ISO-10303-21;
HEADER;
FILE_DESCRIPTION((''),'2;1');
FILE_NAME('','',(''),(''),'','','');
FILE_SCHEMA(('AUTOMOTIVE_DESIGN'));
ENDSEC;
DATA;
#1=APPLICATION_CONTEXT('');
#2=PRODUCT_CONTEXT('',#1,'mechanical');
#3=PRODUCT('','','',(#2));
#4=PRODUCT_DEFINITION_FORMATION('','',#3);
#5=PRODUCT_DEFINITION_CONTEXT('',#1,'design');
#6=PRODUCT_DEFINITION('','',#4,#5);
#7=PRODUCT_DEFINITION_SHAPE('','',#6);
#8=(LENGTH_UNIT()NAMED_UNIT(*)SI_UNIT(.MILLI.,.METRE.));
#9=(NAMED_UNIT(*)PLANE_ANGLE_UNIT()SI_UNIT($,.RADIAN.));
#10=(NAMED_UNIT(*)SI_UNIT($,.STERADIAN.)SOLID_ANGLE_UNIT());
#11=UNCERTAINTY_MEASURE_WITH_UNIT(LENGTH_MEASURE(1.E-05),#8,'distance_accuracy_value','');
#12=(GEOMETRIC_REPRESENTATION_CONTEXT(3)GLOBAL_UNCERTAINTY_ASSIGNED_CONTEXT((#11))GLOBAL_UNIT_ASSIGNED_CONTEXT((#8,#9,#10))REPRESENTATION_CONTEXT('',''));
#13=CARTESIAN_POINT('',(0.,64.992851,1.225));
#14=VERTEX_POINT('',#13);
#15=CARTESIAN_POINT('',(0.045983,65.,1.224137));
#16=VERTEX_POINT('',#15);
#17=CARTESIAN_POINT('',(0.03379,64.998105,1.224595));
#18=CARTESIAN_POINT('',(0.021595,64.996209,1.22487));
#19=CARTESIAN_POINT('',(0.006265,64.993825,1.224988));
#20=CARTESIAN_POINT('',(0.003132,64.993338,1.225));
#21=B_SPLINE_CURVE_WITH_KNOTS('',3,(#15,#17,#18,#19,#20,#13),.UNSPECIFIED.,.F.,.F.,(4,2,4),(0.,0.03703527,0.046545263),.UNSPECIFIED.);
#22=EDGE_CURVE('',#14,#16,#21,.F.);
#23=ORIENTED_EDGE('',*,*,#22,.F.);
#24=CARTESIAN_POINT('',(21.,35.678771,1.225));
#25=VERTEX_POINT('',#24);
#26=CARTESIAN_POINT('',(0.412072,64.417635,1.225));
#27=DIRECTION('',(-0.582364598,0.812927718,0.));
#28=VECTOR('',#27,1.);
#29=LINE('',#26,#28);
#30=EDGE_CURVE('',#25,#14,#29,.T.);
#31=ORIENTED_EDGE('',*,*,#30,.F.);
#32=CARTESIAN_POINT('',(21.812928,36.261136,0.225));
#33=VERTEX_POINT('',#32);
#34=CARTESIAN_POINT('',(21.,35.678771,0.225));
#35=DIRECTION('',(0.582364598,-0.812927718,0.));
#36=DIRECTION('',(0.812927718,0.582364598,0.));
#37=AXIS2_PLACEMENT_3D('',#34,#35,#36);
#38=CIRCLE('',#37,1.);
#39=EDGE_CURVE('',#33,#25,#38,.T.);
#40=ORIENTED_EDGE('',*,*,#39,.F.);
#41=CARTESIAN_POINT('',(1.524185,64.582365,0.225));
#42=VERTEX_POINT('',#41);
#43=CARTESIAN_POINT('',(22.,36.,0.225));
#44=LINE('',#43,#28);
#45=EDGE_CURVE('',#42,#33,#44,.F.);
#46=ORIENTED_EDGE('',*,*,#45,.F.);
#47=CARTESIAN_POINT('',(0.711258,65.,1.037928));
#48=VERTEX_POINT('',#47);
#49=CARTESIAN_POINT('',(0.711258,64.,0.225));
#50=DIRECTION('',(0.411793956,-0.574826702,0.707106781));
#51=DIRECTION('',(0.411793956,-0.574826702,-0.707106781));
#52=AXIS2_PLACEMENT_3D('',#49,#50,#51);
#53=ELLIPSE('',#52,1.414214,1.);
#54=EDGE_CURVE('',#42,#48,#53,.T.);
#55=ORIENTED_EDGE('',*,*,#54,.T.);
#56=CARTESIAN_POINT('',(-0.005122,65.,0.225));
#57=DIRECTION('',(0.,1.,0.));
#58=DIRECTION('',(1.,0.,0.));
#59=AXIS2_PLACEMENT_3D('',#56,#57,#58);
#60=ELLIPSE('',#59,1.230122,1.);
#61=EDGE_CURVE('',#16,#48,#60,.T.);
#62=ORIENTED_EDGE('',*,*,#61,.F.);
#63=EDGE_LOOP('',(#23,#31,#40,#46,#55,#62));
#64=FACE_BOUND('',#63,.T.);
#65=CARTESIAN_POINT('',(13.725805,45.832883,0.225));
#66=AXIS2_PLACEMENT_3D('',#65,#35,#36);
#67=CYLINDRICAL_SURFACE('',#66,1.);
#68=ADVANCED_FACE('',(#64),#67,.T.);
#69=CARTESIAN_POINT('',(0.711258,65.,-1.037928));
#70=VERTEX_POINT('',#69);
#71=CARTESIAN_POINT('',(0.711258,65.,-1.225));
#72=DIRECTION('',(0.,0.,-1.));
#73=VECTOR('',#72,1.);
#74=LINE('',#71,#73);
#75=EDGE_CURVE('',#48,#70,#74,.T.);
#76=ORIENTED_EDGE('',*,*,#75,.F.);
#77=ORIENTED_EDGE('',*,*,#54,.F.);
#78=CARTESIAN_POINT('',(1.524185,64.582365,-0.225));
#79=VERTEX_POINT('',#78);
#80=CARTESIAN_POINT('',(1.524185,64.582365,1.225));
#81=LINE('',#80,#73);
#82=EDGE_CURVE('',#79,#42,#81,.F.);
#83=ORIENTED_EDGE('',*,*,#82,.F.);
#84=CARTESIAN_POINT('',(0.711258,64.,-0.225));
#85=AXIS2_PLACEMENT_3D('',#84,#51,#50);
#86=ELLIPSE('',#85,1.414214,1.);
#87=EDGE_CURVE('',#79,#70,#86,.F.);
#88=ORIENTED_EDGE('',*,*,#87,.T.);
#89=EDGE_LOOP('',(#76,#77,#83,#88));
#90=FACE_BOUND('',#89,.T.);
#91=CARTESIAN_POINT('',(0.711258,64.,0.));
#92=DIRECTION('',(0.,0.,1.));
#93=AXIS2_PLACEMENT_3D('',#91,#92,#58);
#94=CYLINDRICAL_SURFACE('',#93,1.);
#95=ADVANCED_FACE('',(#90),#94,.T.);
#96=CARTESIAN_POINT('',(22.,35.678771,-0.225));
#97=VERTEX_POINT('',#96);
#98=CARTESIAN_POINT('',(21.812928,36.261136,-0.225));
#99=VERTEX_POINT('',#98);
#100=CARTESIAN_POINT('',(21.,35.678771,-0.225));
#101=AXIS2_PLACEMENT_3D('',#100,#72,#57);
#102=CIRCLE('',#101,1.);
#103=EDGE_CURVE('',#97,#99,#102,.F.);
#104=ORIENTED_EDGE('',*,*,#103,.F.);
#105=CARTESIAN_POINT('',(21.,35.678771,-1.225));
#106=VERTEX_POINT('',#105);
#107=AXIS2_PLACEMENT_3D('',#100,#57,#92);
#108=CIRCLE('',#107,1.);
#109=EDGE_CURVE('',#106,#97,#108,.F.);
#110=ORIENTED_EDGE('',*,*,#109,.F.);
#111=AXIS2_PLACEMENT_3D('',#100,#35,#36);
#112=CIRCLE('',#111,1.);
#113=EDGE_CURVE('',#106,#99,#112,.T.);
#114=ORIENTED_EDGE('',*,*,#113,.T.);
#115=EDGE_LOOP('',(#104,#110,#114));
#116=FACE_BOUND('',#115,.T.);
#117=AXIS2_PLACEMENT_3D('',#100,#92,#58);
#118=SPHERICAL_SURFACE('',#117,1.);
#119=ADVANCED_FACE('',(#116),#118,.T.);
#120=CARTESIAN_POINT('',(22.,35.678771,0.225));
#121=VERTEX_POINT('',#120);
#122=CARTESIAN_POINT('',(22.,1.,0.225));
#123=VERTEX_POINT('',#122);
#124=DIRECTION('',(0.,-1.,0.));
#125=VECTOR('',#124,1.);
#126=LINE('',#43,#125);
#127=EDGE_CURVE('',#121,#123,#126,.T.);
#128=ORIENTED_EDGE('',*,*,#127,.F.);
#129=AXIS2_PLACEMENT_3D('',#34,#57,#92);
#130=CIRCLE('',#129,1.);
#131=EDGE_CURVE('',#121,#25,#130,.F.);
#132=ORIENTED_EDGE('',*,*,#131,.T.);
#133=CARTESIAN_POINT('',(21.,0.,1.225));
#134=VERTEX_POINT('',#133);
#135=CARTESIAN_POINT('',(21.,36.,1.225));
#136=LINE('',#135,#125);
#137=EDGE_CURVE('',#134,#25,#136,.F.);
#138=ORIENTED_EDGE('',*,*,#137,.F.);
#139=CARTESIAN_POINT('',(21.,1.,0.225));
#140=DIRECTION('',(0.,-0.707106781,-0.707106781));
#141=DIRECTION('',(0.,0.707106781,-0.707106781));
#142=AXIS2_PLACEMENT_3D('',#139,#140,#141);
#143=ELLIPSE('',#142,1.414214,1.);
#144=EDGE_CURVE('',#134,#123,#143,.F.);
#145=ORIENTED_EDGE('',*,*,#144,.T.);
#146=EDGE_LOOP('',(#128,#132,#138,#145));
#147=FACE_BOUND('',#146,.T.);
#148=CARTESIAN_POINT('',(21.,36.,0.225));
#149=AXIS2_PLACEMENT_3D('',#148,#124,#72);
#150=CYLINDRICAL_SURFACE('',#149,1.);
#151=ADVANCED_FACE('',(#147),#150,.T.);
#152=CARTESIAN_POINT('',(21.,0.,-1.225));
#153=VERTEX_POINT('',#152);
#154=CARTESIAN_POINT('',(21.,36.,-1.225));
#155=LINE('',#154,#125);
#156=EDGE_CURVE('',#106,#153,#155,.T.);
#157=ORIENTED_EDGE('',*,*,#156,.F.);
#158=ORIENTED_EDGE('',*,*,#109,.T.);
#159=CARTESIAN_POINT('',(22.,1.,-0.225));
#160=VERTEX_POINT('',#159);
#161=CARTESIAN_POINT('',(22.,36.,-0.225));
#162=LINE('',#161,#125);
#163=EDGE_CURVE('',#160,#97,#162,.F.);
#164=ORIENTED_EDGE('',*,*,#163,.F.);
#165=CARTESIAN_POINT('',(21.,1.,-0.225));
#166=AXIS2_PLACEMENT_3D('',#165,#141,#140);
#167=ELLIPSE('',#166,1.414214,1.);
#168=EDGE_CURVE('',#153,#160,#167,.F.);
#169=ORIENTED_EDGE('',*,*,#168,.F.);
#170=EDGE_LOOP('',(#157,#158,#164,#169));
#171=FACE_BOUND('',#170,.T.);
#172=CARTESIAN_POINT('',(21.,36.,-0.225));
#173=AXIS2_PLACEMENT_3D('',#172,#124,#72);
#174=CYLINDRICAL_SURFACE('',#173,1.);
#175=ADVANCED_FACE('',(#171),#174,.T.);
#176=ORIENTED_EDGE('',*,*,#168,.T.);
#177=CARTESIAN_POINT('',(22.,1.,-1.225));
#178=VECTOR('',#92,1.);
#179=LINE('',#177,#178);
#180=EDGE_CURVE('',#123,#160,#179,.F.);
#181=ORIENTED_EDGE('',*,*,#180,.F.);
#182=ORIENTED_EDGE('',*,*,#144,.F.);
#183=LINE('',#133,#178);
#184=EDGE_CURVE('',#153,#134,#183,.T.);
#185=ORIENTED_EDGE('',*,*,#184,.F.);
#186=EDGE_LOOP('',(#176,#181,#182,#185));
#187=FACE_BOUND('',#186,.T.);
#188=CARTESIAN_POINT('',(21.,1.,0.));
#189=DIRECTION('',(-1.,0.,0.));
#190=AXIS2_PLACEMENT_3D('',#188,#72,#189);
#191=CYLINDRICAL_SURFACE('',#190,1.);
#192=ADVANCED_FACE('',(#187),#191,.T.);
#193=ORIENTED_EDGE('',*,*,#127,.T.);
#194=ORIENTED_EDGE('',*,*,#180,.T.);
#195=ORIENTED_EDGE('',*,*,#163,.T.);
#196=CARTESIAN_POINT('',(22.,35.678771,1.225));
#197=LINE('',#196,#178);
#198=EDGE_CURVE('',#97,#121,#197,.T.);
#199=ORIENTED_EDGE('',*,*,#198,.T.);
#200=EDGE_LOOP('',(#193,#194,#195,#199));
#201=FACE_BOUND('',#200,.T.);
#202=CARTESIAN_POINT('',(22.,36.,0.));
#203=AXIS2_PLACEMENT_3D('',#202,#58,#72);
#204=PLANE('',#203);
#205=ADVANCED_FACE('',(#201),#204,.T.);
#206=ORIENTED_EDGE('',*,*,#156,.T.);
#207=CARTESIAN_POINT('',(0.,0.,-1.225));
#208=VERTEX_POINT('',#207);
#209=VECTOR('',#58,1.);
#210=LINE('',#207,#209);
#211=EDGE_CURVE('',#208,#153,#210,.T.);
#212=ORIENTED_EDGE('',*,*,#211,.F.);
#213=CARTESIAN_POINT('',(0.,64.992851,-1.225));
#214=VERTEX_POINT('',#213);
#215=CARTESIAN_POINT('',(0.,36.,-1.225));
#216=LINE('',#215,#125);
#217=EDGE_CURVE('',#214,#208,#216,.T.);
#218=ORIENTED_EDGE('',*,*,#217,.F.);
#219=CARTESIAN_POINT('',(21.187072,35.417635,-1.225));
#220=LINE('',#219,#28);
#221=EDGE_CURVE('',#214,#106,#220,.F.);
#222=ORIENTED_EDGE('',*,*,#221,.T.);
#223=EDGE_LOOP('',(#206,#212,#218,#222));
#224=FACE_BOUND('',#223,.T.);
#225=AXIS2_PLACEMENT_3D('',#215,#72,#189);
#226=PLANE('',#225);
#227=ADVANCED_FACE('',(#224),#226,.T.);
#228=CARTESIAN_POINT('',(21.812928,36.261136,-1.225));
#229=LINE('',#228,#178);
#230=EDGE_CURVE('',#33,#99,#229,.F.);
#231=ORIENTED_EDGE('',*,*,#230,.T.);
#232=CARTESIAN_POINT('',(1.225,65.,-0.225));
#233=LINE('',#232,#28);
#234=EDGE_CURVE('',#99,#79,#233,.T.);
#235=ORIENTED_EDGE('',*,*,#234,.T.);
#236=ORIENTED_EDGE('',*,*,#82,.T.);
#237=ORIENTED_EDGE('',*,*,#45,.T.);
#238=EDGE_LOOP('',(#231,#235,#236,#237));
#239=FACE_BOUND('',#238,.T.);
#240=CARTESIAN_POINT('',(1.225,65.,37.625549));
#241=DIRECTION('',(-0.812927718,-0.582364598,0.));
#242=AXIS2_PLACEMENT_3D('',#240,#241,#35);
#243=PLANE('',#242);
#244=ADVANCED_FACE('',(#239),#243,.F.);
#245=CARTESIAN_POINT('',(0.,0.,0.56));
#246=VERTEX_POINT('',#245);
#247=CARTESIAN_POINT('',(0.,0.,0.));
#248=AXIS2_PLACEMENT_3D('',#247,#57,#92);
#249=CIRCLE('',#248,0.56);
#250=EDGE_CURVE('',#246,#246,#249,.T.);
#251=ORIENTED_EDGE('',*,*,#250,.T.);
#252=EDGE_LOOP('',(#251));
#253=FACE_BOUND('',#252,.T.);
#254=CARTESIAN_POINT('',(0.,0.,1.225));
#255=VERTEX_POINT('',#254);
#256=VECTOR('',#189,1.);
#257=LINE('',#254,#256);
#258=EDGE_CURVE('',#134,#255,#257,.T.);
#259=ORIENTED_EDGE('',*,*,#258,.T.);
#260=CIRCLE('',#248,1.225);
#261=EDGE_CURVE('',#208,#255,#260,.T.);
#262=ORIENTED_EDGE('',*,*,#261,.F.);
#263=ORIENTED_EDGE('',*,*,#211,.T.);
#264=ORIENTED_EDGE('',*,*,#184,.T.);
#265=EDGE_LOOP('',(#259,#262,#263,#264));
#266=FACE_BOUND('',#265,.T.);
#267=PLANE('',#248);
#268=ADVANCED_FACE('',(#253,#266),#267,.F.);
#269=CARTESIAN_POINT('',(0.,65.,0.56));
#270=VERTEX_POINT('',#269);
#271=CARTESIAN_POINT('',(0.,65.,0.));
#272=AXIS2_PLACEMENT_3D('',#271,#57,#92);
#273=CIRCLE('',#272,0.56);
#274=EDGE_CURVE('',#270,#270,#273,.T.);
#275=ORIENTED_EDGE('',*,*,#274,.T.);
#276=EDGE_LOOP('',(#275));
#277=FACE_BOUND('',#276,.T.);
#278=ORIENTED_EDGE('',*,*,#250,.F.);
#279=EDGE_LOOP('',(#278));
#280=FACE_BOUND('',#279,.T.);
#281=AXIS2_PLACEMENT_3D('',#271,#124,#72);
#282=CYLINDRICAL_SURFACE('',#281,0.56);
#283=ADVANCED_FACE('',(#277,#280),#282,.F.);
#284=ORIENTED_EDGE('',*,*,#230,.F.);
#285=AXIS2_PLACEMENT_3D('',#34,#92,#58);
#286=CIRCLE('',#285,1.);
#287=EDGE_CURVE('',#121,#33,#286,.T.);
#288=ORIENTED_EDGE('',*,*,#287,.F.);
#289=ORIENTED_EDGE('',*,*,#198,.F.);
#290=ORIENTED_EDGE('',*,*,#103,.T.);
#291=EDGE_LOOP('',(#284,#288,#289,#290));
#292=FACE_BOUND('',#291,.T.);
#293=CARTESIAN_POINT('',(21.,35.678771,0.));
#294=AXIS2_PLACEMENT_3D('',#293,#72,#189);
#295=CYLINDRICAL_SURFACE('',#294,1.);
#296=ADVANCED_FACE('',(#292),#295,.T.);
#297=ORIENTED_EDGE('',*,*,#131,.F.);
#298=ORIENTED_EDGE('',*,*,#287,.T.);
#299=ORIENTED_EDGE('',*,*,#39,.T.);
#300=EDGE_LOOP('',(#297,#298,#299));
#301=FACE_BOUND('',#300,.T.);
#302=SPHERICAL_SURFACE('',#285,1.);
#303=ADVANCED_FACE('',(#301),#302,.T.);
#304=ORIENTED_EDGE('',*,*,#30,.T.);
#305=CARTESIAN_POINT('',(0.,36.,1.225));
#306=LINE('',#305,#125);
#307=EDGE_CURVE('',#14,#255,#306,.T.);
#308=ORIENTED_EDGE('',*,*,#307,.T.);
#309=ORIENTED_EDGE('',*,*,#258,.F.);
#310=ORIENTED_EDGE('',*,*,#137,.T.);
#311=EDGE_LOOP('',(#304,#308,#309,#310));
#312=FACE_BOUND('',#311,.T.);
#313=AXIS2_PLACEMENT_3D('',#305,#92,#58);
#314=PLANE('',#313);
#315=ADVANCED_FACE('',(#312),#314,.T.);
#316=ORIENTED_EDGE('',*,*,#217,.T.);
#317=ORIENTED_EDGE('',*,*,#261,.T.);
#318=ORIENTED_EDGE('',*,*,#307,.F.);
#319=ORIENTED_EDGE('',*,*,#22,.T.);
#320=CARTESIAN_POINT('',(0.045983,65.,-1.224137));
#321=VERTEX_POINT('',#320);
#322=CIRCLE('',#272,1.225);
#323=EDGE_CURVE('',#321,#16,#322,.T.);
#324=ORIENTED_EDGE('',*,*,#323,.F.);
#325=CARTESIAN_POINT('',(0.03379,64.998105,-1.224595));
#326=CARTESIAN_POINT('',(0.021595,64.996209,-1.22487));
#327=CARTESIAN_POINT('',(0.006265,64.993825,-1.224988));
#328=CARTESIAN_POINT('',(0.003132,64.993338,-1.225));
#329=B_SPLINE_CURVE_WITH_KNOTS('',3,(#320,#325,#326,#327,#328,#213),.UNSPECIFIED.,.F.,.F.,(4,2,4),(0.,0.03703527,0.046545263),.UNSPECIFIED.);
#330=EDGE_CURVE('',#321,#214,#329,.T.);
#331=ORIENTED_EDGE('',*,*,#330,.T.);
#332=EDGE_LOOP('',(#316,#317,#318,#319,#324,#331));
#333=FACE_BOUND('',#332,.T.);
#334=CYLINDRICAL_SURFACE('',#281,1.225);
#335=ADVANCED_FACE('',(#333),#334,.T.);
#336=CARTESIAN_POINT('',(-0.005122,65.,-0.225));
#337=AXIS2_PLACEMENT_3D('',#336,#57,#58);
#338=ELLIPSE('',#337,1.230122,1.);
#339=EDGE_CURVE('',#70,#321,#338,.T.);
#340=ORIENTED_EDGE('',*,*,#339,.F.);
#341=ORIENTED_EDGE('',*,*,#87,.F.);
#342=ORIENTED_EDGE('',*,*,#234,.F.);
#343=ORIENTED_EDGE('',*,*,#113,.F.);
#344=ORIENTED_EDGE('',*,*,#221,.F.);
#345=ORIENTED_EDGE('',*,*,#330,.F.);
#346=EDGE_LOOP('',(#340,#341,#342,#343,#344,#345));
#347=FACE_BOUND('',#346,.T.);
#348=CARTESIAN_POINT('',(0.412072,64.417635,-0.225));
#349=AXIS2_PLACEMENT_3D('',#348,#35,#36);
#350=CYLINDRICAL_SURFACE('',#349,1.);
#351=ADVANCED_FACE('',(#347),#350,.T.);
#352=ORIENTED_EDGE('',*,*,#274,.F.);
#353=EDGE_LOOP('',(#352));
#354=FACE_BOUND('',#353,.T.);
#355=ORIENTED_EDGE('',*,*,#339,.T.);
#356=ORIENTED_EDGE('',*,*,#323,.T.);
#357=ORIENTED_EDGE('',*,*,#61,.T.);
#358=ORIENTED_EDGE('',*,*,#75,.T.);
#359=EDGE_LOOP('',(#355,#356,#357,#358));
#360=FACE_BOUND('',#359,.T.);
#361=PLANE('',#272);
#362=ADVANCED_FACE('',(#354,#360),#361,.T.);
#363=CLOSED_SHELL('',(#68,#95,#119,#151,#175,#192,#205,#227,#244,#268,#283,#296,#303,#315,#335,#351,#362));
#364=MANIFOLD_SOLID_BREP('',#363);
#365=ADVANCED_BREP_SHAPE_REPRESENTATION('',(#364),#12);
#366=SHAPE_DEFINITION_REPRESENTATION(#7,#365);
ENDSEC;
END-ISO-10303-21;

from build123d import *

# Parameters (mm, degrees)
SKETCH1_R                       = 1.225
SKETCH1_R_2                     = 0.56
BOSS_EXTRUDE1_DEPTH             = 65
BOSS_EXTRUDE2_DEPTH             = 36
BOSS_EXTRUDE3_REACH             = 70.633
BOSS_EXTRUDE3_DIRECTION_2_REACH = 70.633
CUT_EXTRUDE1_DEPTH              = 69.633086955
CUT_EXTRUDE1_DEPTH_BACK         = 69.633086955
SKETCH3_R                       = 0.56
FILLET2_R                       = 1


with BuildPart() as part:
    # Sketch1 → Boss-Extrude1 (new body)
    with BuildSketch(Plane(origin=(0, 0, 0), x_dir=(1, 0, 0), z_dir=(0, 1, 0))):
        with Locations(Location((0, 0, 0), (0, 0, 270))):
            Circle(SKETCH1_R)
        with Locations(Location((0, 0, 0), (0, 0, 270))):
            Circle(SKETCH1_R_2, mode=Mode.SUBTRACT)
    extrude(amount=BOSS_EXTRUDE1_DEPTH)

    # Sketch1<4> → Boss-Extrude2 (add)
    with BuildSketch(Plane(origin=(0, 0, 0), x_dir=(1, 0, 0), z_dir=(0, 1, 0))):
        with BuildLine():
            Line((22, 1.225), (0, 1.225))
            ThreePointArc((0, 1.225), (0.866205807, 0.866205807), (1.225, 0))
            ThreePointArc((1.225, 0), (0.866205807, -0.866205807), (0, -1.225))
            Line((0, -1.225), (22, -1.225))
            Line((22, -1.225), (22, 1.225))
        make_face()
    extrude(amount=BOSS_EXTRUDE2_DEPTH)

    # Boss-Extrude3: up to this face of the body (flat: up to its plane)
    boss_extrude3_end = Plane(part.part.faces().sort_by_distance((11, 18, 1.225))[0])
    # Sketch2 → Boss-Extrude3 (add, up to the picked face)
    with BuildSketch(Plane.XY, mode=Mode.PRIVATE) as boss_extrude3_sk1:
        Polygon((1.225, 65), (22, 36), (0, 36), (0, 65), align=None)
    boss_extrude3_tool1 = split(extrude(boss_extrude3_sk1.sketch, amount=BOSS_EXTRUDE3_REACH, mode=Mode.PRIVATE), bisect_by=boss_extrude3_end, keep=Keep.BOTH, mode=Mode.PRIVATE)
    add(boss_extrude3_tool1.solids().sort_by(Axis((7.354871, 46.176534, 0), (0, 0, 1)))[0])

    # Boss-Extrude3 direction 2: up to this face of the body (flat: up to its plane)
    boss_extrude3_direction_2_end = Plane(part.part.faces().sort_by_distance((11, 18, -1.225))[0])
    # Sketch2 → Boss-Extrude3 direction 2 (add, up to the picked face)
    with BuildSketch(Plane.XY, mode=Mode.PRIVATE) as boss_extrude3_direction_2_sk1:
        Polygon((1.225, 65), (22, 36), (0, 36), (0, 65), align=None)
    boss_extrude3_direction_2_tool1 = split(extrude(boss_extrude3_direction_2_sk1.sketch, amount=-BOSS_EXTRUDE3_DIRECTION_2_REACH, mode=Mode.PRIVATE), bisect_by=boss_extrude3_direction_2_end, keep=Keep.BOTH, mode=Mode.PRIVATE)
    add(boss_extrude3_direction_2_tool1.solids().sort_by(Axis((7.354871, 46.176534, 0), (0, 0, -1)))[0])

    # Sketch3 → Cut-Extrude1 (cut, two sides: drawn at the far end of the back side and taken through both)
    with BuildSketch(Plane(origin=(0, 0, 0), x_dir=(1, 0, 0), z_dir=(0, 1, 0)).offset(-CUT_EXTRUDE1_DEPTH_BACK)):
        with Locations(Location((0, 0, 0), (0, 0, 270))):
            Circle(SKETCH3_R)
    extrude(amount=CUT_EXTRUDE1_DEPTH + CUT_EXTRUDE1_DEPTH_BACK, mode=Mode.SUBTRACT)

    # Fillet2
    # the kernel refuses this fillet: 1 mm, written as the material it takes off along each edge
    with BuildSketch(Plane(origin=(21, 35.678771199, 0.225), x_dir=(0.8129277181323856, 0.5823645980758727, 0), z_dir=(0, 0, 1))) as fillet2_piece_1_section:
        Polygon((0, 0), (FILLET2_R * 1.02, 0), (FILLET2_R * 1.02, -FILLET2_R * 0.327653377515), (FILLET2_R * 0.829186272495, -FILLET2_R * 0.594011890037), align=None)
    fillet2_piece_1 = extrude(amount=FILLET2_R * 1.02, mode=Mode.PRIVATE)
    fillet2_piece_1 = fillet2_piece_1 - Plane(origin=(21, 35.678771199, 0.225), x_dir=(-0.9520839558915971, -0.3058367880648226, 0), z_dir=(0, 0, 1)) * Sphere(FILLET2_R, mode=Mode.PRIVATE)
    add(fillet2_piece_1, mode=Mode.SUBTRACT)
    with BuildSketch(Plane(origin=(21, 35.678771199, -0.225), x_dir=(0.8129277181323856, 0.5823645980758727, 0), z_dir=(0, 0, -1))) as fillet2_piece_2_section:
        Polygon((0, 0), (FILLET2_R * 1.02, 0), (FILLET2_R * 1.02, FILLET2_R * 0.327653377515), (FILLET2_R * 0.829186272495, FILLET2_R * 0.594011890037), align=None)
    fillet2_piece_2 = extrude(amount=FILLET2_R * 1.02, mode=Mode.PRIVATE)
    fillet2_piece_2 = fillet2_piece_2 - Plane(origin=(21, 35.678771199, -0.225), x_dir=(-0.9520839558915971, -0.3058367880648226, 0), z_dir=(0, 0, -1)) * Sphere(FILLET2_R, mode=Mode.PRIVATE)
    add(fillet2_piece_2, mode=Mode.SUBTRACT)
    with BuildSketch(Plane(origin=(22, -2.5, 1.225), x_dir=(0, 0, -1), z_dir=(0, 1, 0))) as fillet2_piece_3:
        with BuildLine():
            CenterArc((FILLET2_R, FILLET2_R), FILLET2_R, 180, 90)
            Line((0, FILLET2_R), (0, 0))
            Line((0, 0), (FILLET2_R, 0))
        make_face()
    extrude(amount=38.178771199, mode=Mode.SUBTRACT)
    with BuildSketch(Plane(origin=(22, -2.5, -1.225), x_dir=(0, 0, 1), z_dir=(0, 1, 0))) as fillet2_piece_4:
        with BuildLine():
            CenterArc((FILLET2_R, -FILLET2_R), FILLET2_R, 90, 90)
            Line((0, -FILLET2_R), (0, 0))
            Line((0, 0), (FILLET2_R, 0))
        make_face()
    extrude(amount=38.178771199, mode=Mode.SUBTRACT)
    with BuildSketch(Plane(origin=(22, 0, 3.725), x_dir=(0, 1, 0), z_dir=(0, 0, -1))) as fillet2_piece_5:
        with BuildLine():
            CenterArc((FILLET2_R, -FILLET2_R), FILLET2_R, 90, 90)
            Line((0, -FILLET2_R), (0, 0))
            Line((0, 0), (FILLET2_R, 0))
        make_face()
    extrude(amount=7.45, mode=Mode.SUBTRACT)
    with BuildSketch(Plane(origin=(1.225, 65, 2.509355892), x_dir=(-1, 0, 0), z_dir=(0, 0, -1))) as fillet2_piece_6:
        with BuildLine():
            CenterArc((FILLET2_R * 0.513742356926, -FILLET2_R), FILLET2_R, 90, 54.382971688)
            Line((-FILLET2_R * 0.299185361206, -FILLET2_R * 0.417635401924), (0, 0))
            Line((0, 0), (FILLET2_R * 0.513742356926, 0))
        make_face()
    extrude(amount=5.018711785, mode=Mode.SUBTRACT)
    with BuildSketch(Plane(origin=(-0.230911495, 67.032319295, 1.225), x_dir=(0, 0, -1), z_dir=(0.5823645980758727, -0.8129277181323856, 0))) as fillet2_piece_7_section:
        with BuildLine():
            CenterArc((FILLET2_R, -FILLET2_R), FILLET2_R, 90, 90)
            Line((0, -FILLET2_R), (0, 0))
            Line((0, 0), (FILLET2_R, 0))
        make_face()
    fillet2_piece_7 = extrude(amount=37.852299549, mode=Mode.PRIVATE)
    fillet2_piece_7 = fillet2_piece_7 - Plane(origin=(0, 50.565320585, 0), x_dir=(0, 0, 1), z_dir=(0, -1, 0)) * Cylinder(1.225, 80, mode=Mode.PRIVATE)
    add(fillet2_piece_7, mode=Mode.SUBTRACT)
    with BuildSketch(Plane(origin=(-0.230911495, 67.032319295, -1.225), x_dir=(0, 0, 1), z_dir=(0.5823645980758727, -0.8129277181323856, 0))) as fillet2_piece_8_section:
        with BuildLine():
            CenterArc((FILLET2_R, FILLET2_R), FILLET2_R, 180, 90)
            Line((0, FILLET2_R), (0, 0))
            Line((0, 0), (FILLET2_R, 0))
        make_face()
    fillet2_piece_8 = extrude(amount=37.852299549, mode=Mode.PRIVATE)
    fillet2_piece_8 = fillet2_piece_8 - Plane(origin=(0, 50.565320569, 0), x_dir=(0, 0, 1), z_dir=(0, -1, 0)) * Cylinder(1.225, 80, mode=Mode.PRIVATE)
    add(fillet2_piece_8, mode=Mode.SUBTRACT)
    with BuildSketch(Plane(origin=(22, 36, 0.225), x_dir=(-0.582364598075886, 0.812927718132376, 0), z_dir=(0, 0, -1))) as fillet2_piece_9:
        with BuildLine():
            CenterArc((FILLET2_R * 0.321228801486, -FILLET2_R), FILLET2_R, 90, 35.617028312)
            Line((-FILLET2_R * 0.26113579659, -FILLET2_R * 0.187072281868), (0, 0))
            Line((0, 0), (FILLET2_R * 0.321228801486, 0))
        make_face()
    extrude(amount=0.45, mode=Mode.SUBTRACT)


solid = part.part
